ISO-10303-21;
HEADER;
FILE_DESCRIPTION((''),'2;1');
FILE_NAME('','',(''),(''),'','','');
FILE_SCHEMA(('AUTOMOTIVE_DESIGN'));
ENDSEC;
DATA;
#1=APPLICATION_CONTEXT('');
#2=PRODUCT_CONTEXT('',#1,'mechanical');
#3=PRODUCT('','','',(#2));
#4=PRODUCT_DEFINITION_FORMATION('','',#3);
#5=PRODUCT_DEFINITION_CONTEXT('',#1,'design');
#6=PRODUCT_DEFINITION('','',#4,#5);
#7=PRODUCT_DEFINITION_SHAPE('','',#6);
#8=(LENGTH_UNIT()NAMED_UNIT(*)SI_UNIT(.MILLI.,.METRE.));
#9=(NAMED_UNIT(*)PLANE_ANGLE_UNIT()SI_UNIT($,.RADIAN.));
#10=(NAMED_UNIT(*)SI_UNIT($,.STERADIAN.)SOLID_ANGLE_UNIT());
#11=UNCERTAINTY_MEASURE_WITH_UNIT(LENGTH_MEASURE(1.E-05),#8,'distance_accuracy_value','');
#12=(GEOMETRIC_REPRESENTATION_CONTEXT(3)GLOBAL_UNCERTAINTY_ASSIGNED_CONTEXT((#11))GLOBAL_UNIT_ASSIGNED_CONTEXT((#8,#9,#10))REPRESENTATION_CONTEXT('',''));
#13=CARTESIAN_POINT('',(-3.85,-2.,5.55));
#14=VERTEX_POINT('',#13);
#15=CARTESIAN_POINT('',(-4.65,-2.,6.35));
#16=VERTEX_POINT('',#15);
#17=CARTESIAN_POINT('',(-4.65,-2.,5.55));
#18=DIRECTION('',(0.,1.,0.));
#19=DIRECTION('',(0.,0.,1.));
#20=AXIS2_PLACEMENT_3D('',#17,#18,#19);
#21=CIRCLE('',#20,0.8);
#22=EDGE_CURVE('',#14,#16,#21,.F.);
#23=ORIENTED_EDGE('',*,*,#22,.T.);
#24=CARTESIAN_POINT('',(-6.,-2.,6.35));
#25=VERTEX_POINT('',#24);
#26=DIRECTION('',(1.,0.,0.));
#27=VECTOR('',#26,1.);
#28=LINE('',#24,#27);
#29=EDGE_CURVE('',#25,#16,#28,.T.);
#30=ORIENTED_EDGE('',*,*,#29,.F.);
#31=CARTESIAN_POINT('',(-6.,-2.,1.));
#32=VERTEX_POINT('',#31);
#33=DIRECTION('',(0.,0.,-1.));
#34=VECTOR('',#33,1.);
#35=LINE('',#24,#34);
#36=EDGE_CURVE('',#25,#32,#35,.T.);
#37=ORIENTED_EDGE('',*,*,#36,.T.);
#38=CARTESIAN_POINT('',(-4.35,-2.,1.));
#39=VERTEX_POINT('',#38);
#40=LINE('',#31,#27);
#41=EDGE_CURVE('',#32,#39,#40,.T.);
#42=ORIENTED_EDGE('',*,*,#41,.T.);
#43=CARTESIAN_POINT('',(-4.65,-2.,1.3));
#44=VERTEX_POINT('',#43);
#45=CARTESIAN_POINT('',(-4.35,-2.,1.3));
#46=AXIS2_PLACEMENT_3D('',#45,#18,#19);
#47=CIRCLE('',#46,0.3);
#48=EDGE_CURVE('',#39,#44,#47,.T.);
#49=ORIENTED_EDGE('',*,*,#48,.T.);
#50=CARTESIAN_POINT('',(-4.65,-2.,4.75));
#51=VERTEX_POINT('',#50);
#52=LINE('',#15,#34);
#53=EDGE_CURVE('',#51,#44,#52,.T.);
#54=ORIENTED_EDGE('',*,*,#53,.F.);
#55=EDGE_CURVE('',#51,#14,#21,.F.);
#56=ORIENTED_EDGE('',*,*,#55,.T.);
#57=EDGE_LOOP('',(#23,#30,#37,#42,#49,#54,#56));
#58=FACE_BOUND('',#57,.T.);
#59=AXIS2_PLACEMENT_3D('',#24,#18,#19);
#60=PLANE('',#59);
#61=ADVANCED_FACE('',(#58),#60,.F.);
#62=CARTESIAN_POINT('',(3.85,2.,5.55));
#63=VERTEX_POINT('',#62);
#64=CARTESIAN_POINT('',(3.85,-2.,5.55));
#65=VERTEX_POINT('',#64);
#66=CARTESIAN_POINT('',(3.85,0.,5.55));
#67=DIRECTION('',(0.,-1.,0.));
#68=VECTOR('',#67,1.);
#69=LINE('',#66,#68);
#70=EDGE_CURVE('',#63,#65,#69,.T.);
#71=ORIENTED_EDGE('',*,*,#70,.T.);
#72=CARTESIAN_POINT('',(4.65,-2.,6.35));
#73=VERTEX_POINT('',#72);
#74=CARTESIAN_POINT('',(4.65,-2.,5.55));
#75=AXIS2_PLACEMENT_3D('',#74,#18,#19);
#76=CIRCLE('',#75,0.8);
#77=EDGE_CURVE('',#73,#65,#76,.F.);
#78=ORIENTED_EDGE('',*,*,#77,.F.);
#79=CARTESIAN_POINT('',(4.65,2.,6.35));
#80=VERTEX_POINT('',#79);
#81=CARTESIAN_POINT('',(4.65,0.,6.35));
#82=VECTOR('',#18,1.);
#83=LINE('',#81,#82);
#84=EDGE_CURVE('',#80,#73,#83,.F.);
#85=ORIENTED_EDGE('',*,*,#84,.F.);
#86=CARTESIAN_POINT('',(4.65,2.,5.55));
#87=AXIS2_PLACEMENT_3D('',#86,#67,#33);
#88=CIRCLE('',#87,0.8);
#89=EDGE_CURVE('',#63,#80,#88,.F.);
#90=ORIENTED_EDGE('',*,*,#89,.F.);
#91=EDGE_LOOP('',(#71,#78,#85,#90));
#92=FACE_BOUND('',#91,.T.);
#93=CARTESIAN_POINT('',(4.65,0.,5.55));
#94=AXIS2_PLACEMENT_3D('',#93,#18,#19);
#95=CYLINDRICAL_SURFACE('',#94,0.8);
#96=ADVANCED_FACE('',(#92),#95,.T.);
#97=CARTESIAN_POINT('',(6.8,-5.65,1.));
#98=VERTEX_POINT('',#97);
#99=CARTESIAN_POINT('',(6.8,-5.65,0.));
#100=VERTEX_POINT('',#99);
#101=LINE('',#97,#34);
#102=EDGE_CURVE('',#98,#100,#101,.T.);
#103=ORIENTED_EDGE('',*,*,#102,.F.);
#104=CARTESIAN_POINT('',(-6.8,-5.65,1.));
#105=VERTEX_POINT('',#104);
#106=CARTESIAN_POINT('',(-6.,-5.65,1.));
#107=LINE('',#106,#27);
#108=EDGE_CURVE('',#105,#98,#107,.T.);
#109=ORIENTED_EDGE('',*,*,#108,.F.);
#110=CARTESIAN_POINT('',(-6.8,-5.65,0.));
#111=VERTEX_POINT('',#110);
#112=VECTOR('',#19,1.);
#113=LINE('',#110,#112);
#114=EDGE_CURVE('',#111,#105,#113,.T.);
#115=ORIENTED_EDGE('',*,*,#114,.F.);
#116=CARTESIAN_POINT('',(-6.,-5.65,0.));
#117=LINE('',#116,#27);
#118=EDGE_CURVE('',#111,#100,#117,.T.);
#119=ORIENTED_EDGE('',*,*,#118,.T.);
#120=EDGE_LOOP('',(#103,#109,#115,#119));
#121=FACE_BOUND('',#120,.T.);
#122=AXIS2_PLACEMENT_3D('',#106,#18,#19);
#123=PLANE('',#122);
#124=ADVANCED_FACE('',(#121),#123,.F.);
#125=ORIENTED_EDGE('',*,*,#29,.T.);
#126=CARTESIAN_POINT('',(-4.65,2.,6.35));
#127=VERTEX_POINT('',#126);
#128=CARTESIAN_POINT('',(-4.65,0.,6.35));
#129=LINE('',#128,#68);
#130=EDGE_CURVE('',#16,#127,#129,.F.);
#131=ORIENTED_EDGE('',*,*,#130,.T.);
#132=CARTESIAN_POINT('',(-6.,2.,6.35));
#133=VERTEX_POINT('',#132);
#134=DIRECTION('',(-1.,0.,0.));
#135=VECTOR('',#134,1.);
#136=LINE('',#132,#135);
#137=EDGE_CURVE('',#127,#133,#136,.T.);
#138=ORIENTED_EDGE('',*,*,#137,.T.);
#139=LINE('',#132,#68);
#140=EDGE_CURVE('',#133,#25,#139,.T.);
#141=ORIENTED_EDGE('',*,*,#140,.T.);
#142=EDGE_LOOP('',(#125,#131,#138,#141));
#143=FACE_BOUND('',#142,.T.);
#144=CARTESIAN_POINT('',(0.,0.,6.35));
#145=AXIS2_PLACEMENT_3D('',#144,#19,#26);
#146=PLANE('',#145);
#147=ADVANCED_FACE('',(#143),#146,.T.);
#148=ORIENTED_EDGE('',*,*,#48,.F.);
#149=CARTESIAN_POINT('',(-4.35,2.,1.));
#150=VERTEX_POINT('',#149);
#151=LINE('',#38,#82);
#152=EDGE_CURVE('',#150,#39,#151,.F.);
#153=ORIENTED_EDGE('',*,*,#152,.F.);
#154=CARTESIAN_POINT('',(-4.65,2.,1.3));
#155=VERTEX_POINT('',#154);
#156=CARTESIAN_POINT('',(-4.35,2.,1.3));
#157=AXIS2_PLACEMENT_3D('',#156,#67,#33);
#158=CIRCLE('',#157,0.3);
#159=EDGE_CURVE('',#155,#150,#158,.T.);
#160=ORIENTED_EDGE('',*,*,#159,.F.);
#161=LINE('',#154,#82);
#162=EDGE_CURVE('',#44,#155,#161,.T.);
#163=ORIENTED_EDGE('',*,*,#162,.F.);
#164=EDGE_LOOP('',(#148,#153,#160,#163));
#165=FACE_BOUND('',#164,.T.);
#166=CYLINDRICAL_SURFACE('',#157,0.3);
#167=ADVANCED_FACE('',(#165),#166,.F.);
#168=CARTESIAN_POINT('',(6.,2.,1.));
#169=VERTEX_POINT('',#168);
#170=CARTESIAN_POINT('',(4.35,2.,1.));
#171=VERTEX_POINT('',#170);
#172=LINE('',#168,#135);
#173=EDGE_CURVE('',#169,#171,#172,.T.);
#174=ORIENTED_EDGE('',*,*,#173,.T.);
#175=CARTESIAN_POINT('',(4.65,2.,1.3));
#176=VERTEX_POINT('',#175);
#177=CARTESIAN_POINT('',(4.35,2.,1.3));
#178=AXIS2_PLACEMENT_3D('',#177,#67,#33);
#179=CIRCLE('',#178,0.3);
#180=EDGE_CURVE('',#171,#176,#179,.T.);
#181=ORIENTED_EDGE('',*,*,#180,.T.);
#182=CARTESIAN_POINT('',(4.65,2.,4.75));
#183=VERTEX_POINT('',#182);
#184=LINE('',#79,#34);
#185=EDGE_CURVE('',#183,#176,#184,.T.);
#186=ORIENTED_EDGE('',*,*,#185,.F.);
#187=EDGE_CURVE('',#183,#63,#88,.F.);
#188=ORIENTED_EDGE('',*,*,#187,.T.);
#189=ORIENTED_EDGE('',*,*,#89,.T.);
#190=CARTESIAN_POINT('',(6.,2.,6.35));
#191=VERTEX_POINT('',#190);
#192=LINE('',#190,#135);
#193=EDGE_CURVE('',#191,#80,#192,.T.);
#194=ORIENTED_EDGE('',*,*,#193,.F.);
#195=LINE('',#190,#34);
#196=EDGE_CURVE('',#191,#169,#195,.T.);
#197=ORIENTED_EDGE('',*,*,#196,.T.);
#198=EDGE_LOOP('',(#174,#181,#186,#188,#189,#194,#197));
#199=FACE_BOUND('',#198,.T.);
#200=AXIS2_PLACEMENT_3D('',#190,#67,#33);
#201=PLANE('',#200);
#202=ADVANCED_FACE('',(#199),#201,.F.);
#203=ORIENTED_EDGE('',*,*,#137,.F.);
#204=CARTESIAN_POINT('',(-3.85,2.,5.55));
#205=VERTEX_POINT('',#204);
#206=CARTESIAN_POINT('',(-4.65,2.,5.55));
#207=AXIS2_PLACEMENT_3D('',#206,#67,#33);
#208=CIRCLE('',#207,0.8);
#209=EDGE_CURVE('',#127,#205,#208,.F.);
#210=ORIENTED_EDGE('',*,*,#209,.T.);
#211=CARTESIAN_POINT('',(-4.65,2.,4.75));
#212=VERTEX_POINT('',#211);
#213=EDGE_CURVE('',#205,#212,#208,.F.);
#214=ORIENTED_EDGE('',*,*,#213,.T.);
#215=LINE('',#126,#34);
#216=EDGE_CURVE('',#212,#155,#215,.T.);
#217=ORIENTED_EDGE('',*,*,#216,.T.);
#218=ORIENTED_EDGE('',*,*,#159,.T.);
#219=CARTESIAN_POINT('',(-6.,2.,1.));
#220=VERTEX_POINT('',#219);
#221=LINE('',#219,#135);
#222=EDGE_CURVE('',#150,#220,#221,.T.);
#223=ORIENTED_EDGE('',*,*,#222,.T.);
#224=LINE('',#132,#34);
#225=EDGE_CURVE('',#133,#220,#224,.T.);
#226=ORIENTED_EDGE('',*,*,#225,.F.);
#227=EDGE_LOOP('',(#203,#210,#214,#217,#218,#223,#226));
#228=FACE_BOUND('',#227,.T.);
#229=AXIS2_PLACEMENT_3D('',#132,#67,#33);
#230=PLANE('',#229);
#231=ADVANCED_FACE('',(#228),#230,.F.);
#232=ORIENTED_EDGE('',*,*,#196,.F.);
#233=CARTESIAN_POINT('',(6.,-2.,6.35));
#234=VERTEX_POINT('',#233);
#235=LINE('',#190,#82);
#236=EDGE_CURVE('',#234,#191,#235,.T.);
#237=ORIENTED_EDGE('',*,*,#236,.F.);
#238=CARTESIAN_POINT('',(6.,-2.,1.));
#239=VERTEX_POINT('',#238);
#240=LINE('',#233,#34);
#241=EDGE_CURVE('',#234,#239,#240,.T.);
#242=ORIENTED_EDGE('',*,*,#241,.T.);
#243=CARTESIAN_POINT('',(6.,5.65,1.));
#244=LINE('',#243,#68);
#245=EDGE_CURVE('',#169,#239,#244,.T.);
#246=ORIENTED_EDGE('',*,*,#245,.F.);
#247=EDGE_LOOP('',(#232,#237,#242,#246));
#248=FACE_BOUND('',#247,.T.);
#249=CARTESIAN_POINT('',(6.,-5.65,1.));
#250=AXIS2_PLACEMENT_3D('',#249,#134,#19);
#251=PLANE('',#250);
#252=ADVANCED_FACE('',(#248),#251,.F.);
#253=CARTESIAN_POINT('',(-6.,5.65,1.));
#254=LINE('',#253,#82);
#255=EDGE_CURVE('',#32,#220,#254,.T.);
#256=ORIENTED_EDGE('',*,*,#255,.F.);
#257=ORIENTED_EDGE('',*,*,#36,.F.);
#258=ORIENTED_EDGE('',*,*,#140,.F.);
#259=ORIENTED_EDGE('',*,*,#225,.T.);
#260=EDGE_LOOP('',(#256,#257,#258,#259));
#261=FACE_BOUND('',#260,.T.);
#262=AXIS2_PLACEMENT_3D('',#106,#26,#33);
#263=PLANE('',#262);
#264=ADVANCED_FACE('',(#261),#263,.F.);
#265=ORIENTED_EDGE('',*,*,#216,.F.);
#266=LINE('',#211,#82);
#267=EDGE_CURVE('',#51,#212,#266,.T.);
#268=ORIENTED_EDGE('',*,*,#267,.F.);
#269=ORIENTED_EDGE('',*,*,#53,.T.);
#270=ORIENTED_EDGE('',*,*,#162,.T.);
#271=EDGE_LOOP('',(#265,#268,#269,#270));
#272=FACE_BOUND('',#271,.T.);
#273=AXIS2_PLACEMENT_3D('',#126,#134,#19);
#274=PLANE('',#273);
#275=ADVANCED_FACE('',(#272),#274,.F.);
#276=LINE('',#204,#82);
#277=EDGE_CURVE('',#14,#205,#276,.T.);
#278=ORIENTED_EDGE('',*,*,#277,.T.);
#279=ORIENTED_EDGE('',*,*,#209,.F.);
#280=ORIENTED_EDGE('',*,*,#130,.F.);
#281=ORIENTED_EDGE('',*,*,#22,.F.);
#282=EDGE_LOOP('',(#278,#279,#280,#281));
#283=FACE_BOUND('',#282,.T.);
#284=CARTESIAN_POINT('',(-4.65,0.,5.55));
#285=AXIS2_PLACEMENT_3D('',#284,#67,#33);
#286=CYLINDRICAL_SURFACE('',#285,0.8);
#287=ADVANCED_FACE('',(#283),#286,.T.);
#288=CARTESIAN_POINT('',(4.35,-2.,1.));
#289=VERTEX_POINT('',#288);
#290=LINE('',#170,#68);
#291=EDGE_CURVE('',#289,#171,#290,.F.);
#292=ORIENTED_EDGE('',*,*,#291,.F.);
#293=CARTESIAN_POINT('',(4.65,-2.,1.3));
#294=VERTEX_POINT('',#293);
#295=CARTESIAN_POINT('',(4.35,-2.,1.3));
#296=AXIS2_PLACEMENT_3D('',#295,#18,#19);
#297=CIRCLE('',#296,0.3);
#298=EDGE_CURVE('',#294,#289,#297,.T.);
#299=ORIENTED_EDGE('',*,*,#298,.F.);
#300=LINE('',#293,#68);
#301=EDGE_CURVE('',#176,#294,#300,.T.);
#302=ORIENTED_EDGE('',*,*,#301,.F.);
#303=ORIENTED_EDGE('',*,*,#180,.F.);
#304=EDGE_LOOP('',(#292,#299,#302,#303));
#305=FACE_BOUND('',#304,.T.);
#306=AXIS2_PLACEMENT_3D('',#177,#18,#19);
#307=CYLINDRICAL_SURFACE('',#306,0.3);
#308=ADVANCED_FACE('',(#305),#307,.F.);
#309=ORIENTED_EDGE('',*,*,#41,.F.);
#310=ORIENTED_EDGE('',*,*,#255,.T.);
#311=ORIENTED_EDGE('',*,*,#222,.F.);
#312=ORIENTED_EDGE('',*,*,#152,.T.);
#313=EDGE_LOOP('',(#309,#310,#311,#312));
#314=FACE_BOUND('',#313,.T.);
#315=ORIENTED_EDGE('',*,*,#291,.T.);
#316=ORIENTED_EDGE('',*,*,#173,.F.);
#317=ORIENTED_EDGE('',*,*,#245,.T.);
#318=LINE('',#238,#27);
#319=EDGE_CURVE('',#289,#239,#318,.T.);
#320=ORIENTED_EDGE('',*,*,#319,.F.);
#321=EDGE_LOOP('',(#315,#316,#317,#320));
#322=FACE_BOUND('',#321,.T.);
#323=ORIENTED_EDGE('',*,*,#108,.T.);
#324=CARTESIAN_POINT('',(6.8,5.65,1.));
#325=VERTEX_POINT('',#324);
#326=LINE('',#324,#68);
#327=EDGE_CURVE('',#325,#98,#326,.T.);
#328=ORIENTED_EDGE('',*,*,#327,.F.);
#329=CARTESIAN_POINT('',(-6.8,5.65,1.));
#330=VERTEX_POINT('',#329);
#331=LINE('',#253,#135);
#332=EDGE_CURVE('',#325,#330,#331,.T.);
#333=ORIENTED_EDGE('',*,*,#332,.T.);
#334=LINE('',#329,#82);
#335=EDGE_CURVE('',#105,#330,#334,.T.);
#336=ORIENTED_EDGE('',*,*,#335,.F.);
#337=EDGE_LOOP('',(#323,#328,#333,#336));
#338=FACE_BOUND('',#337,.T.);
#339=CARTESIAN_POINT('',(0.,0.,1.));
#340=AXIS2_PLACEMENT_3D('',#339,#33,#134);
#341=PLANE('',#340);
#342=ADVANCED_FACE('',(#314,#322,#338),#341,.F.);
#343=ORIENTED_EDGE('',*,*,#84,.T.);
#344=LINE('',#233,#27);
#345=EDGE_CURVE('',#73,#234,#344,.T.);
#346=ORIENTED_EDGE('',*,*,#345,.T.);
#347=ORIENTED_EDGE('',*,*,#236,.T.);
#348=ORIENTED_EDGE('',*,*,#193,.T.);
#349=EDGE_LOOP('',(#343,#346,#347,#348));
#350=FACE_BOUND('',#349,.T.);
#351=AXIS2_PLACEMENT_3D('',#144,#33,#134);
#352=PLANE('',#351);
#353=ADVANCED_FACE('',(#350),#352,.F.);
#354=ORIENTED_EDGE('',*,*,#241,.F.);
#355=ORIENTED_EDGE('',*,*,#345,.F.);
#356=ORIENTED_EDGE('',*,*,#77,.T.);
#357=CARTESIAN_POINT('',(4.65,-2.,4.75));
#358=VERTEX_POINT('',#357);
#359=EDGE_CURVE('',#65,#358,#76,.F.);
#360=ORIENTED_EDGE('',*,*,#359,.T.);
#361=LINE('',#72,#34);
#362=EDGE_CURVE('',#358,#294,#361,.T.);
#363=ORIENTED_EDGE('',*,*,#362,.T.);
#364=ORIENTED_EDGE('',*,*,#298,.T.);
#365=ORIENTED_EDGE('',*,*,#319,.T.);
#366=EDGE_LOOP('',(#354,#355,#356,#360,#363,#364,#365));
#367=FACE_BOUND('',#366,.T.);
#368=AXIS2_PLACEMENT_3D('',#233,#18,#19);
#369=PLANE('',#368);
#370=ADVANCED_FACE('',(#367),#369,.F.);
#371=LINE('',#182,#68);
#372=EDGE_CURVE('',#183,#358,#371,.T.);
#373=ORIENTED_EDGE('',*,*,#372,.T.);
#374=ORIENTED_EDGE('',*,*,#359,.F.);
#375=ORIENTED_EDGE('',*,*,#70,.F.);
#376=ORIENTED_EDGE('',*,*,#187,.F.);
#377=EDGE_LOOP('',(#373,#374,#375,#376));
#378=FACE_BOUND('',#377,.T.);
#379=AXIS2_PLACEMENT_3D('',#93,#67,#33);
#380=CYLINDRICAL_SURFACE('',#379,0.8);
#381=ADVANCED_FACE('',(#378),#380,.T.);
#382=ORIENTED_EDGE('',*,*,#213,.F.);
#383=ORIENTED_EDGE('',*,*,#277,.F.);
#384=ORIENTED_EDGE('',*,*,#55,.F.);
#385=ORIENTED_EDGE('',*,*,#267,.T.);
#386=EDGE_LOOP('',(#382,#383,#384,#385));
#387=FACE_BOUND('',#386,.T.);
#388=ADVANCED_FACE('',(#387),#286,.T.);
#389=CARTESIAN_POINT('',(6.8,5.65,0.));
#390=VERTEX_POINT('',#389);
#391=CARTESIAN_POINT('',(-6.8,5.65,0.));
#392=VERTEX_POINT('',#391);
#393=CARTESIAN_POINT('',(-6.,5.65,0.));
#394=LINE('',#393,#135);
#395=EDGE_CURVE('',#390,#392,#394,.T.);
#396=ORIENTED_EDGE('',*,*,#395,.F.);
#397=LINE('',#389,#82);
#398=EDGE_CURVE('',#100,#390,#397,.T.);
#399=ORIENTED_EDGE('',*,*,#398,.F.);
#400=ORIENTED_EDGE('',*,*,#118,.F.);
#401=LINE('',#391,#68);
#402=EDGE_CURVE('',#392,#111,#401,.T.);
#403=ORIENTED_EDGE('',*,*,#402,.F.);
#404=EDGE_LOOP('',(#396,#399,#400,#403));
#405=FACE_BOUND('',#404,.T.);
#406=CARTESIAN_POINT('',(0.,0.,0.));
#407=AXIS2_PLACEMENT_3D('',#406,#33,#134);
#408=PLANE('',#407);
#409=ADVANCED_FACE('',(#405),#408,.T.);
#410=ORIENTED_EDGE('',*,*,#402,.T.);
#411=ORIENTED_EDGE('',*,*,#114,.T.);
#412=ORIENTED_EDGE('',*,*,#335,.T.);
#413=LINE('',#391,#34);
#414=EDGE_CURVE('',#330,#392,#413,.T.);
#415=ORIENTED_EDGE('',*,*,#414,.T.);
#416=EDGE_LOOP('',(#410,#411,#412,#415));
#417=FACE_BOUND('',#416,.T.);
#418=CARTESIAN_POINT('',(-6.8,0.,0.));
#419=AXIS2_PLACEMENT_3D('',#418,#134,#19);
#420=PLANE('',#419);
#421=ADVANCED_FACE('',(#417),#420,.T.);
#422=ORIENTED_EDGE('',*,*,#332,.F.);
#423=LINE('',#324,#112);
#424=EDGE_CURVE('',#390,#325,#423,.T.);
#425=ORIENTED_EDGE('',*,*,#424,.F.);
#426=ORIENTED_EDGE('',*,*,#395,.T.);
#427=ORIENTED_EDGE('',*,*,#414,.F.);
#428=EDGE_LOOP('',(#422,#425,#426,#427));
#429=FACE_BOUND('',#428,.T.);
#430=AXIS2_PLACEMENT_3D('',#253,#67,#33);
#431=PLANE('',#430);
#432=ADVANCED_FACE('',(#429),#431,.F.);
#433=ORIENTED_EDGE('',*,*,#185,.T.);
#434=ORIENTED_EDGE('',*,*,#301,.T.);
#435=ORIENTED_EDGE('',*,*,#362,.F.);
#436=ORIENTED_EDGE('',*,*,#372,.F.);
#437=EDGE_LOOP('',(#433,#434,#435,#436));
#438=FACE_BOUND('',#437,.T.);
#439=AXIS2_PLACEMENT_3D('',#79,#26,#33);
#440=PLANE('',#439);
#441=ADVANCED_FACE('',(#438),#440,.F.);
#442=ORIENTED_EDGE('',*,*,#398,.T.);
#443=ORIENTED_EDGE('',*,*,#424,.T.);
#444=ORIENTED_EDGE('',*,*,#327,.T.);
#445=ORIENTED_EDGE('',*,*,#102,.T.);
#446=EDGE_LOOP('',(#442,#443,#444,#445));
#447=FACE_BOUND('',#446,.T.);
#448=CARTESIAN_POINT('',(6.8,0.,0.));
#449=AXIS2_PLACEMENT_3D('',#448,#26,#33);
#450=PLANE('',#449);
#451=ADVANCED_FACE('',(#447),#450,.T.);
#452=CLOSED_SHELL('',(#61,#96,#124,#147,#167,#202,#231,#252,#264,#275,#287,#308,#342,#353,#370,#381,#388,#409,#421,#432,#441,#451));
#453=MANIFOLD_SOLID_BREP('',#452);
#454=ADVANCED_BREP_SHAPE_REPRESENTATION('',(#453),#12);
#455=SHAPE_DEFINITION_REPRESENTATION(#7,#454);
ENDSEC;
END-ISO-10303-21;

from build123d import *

# Parameters (mm, degrees)
SKETCH_1_W      = 12
SKETCH_1_H      = 11.3
EXTRUDE_1_DEPTH = 1
SKETCH_2_W      = 1.35
SKETCH_2_H      = 4
EXTRUDE_2_DEPTH = 5.35
SKETCH_3_W      = 1.6
SKETCH_3_H      = 4
EXTRUDE_3_DEPTH = 0.8
SKETCH_4_W      = 1.6
SKETCH_4_H      = 4
EXTRUDE_4_DEPTH = 0.8
FILLET_1_R      = 0.8
FILLET_2_R      = 0.3
SKETCH_5_W      = 1
SKETCH_5_H      = 11.3
EXTRUDE_5_DEPTH = 0.8
SKETCH_6_W      = 1
SKETCH_6_H      = 11.3
EXTRUDE_6_DEPTH = 0.8


with BuildPart() as part:
    # 스케치1 → 보스-돌출1 (new body)
    with BuildSketch(Plane.XY):
        Rectangle(SKETCH_1_W, SKETCH_1_H)
    extrude(amount=EXTRUDE_1_DEPTH)

    # 스케치2 → 보스-돌출2 (add)
    with BuildSketch(Plane.XY.offset(1)):
        with Locations((-5.325, 0)):
            Rectangle(SKETCH_2_W, SKETCH_2_H)
        with Locations((5.325, 0)):
            Rectangle(SKETCH_2_W, SKETCH_2_H)
    extrude(amount=EXTRUDE_2_DEPTH)

    # 스케치3 → 보스-돌출3 (add)
    with BuildSketch(Plane(origin=(-4.65, 0, 0), x_dir=(0, 0, -1), z_dir=(1, 0, 0))):
        with Locations((-5.55, 0)):
            Rectangle(SKETCH_3_W, SKETCH_3_H)
    extrude(amount=EXTRUDE_3_DEPTH)

    # 스케치4 → 보스-돌출4 (add)
    with BuildSketch(Plane.ZY.offset(-4.65)):
        with Locations((5.55, 0)):
            Rectangle(SKETCH_4_W, SKETCH_4_H)
    extrude(amount=EXTRUDE_4_DEPTH)

    # 필렛1
    fillet_1_edges = [part.edges().sort_by_distance(p)[0] for p in [
        (3.85, 0, 6.35),
        (3.85, 0, 4.75),
        (-3.85, 0, 6.35),
        (-3.85, 0, 4.75),
    ]]
    fillet(fillet_1_edges, radius=FILLET_1_R - 0.0001)  # a hair under: the kernel refuses the full size

    # 필렛2
    fillet_2_edges = [part.edges().sort_by_distance(p)[0] for p in [
        (-4.65, 0, 1),
        (4.65, 0, 1),
    ]]
    fillet(fillet_2_edges, radius=FILLET_2_R)

    # 스케치5 → 보스-돌출5 (add)
    with BuildSketch(Plane.ZY.offset(6)):
        with Locations((0.5, 0)):
            Rectangle(SKETCH_5_W, SKETCH_5_H)
    extrude(amount=EXTRUDE_5_DEPTH)

    # 스케치6 → 보스-돌출6 (add)
    with BuildSketch(Plane(origin=(6, 0, 0), x_dir=(0, 0, -1), z_dir=(1, 0, 0))):
        with Locations((-0.5, 0)):
            Rectangle(SKETCH_6_W, SKETCH_6_H)
    extrude(amount=EXTRUDE_6_DEPTH)


solid = part.part
